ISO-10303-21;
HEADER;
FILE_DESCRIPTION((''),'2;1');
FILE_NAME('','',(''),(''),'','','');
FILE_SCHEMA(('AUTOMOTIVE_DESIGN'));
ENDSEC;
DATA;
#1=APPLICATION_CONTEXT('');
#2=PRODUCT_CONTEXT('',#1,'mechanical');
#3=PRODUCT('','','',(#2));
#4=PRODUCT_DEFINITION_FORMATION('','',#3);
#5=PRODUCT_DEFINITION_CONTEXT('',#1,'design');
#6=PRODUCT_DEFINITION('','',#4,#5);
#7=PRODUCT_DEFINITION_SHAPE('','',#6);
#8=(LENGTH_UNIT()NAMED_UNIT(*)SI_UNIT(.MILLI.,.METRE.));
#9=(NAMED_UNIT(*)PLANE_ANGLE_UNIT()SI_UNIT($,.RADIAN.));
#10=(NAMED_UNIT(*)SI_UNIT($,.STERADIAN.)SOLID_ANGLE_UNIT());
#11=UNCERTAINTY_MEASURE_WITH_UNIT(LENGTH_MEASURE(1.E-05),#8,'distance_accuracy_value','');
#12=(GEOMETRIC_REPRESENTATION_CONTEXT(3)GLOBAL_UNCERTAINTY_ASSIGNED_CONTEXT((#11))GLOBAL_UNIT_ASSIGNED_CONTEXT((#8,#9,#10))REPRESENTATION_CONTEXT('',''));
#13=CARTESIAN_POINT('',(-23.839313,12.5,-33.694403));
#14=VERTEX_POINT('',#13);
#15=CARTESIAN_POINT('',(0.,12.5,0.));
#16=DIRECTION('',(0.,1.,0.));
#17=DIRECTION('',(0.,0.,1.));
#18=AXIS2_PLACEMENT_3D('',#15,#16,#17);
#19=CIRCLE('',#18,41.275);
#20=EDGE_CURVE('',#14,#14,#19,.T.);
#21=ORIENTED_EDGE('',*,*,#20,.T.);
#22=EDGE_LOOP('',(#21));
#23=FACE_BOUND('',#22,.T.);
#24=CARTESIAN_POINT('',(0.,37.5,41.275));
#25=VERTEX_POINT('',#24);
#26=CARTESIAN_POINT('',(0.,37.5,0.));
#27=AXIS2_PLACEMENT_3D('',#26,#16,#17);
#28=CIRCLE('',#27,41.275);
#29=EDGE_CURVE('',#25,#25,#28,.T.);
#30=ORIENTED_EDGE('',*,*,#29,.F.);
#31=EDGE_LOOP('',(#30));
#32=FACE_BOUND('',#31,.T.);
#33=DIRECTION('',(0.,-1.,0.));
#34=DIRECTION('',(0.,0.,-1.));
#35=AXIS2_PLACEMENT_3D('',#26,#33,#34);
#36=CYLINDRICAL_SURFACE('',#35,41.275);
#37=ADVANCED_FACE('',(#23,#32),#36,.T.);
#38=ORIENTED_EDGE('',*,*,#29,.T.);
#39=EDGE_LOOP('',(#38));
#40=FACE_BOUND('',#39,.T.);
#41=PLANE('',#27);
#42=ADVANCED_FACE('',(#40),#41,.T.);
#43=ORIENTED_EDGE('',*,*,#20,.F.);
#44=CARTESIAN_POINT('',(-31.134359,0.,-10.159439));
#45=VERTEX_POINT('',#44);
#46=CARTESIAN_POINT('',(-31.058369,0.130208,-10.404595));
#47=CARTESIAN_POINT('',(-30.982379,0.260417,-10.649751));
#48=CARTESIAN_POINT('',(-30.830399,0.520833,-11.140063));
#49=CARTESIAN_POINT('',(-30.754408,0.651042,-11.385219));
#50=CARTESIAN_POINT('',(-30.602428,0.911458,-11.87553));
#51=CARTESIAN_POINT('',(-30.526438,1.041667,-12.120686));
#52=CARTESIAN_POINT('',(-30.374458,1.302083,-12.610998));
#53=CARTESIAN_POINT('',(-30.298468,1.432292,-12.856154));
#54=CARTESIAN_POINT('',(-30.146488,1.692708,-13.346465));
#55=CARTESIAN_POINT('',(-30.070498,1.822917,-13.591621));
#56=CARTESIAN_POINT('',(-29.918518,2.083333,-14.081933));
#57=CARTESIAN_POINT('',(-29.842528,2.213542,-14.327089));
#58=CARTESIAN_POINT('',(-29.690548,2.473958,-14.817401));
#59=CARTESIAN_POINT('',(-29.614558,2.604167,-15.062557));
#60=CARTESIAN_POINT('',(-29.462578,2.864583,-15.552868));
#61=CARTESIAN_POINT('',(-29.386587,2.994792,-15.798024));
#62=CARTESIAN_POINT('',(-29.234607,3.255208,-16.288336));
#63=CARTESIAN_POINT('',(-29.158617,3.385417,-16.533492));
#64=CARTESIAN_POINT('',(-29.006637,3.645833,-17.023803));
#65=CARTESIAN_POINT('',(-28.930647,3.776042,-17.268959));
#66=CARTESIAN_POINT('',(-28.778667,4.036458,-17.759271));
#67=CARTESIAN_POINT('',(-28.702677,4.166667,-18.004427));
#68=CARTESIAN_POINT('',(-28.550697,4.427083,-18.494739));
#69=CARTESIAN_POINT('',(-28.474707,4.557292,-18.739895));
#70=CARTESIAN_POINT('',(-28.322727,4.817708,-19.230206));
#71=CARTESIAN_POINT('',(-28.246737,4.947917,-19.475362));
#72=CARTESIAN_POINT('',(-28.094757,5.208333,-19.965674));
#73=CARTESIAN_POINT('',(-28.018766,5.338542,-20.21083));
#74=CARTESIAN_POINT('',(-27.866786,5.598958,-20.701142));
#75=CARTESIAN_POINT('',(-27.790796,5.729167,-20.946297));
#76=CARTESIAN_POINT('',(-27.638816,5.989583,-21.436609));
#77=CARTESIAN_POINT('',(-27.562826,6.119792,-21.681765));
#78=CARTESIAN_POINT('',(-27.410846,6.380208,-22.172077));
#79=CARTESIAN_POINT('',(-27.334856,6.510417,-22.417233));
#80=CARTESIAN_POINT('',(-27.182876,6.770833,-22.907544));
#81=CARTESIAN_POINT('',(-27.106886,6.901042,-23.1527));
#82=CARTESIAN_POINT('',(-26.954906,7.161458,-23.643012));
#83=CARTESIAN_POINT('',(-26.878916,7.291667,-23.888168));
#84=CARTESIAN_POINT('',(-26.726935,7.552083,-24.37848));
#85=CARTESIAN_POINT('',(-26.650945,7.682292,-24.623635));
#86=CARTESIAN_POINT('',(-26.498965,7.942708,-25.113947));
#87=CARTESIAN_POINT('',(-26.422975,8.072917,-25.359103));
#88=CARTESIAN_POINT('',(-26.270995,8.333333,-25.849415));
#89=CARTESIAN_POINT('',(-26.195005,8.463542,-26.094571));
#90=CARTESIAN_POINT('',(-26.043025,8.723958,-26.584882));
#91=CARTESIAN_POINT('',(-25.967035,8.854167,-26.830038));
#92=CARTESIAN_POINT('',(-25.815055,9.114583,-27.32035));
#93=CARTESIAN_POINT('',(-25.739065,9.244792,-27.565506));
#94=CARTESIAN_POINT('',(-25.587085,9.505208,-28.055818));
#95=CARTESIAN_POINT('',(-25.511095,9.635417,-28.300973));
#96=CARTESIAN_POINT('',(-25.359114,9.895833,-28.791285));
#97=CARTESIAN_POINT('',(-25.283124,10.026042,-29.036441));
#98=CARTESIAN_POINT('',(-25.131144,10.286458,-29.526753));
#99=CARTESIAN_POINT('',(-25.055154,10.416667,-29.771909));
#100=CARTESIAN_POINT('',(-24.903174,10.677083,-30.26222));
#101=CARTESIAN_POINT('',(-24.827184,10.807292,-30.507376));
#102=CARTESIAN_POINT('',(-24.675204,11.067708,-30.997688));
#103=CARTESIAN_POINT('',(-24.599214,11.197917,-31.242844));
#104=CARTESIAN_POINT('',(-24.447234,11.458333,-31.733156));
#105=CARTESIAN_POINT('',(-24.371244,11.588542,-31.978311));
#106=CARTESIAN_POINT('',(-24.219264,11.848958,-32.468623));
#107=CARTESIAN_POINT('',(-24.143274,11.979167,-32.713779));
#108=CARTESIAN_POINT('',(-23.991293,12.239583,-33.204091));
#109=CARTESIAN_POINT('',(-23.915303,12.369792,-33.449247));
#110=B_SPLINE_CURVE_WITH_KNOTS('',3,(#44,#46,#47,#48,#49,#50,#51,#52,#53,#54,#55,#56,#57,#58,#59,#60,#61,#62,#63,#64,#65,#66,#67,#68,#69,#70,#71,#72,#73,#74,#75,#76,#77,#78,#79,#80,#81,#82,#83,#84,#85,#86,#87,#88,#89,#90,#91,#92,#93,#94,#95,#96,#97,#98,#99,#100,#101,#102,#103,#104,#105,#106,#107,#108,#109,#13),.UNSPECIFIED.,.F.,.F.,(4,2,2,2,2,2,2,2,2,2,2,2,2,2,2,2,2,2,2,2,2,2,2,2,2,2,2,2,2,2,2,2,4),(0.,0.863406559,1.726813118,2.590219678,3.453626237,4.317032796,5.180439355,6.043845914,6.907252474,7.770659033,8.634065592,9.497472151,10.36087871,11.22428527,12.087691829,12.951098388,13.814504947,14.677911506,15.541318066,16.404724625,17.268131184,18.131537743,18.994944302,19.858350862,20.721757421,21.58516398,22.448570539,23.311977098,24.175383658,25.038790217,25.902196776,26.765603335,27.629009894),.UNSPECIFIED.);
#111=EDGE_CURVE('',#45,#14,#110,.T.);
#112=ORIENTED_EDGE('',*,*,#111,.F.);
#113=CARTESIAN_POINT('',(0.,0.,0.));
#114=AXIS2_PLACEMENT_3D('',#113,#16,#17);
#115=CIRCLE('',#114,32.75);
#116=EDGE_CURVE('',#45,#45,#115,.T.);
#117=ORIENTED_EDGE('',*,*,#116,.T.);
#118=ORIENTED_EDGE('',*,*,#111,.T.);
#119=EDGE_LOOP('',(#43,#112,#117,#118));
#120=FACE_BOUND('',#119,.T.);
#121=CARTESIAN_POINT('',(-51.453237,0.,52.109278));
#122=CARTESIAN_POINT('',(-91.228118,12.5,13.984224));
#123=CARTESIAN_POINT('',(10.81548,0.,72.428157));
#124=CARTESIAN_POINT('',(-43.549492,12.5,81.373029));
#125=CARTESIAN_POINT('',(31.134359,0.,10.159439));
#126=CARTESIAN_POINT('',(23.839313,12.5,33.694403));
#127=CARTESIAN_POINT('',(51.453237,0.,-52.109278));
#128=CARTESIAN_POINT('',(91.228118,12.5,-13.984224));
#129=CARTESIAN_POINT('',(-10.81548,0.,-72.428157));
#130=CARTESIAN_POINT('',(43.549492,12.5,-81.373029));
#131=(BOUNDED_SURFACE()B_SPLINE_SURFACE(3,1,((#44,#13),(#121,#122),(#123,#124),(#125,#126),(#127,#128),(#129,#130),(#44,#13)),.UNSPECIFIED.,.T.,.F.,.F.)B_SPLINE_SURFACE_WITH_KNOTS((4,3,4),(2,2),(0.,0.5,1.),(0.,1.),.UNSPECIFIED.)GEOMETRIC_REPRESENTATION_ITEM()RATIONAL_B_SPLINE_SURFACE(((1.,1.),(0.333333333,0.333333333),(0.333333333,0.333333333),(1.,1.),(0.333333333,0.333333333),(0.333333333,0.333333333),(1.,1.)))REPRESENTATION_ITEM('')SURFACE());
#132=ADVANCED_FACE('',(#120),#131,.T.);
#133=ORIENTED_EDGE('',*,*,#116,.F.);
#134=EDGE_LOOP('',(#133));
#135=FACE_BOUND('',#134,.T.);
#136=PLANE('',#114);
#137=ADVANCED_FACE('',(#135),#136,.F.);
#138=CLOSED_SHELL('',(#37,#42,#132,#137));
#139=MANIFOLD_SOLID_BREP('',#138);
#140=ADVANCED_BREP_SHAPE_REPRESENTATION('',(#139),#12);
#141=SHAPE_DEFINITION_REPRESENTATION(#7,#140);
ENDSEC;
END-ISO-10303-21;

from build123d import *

# Parameters (mm, degrees)
SKETCH3_R           = 41.275
BOSS_EXTRUDE1_DEPTH = 25


with BuildPart() as part:
    # Loft1: read off the stored shape, not the designer's step
    # Loft1: loft between two sections, ruled curve by curve
    loft1_from = [
        Edge.make_bspline([(-31.134358767, 0, -10.159439166), (-51.453237099, 0, 52.109278368), (10.815480435, 0, 72.4281567), (31.134358767, 0, 10.159439166), (51.453237099, 0, -52.109278368), (-10.815480435, 0, -72.4281567), (-31.134358767, 0, -10.159439166)], [0, 0, 0, 0, 0.5, 0.5, 0.5, 1, 1, 1, 1], 3, [1, 0.333333333, 0.333333333, 1, 0.333333333, 0.333333333, 1]),
    ]
    loft1_to = [
        Edge.make_bspline([(-23.839313334, 12.499999892, -33.694402573), (-91.22811848, 12.499999892, 13.984224094), (-43.549491813, 12.499999892, 81.373029241), (23.839313334, 12.499999892, 33.694402573), (91.22811848, 12.499999892, -13.984224094), (43.549491813, 12.499999892, -81.373029241), (-23.839313334, 12.499999892, -33.694402573)], [0, 0, 0, 0, 0.5, 0.5, 0.5, 1, 1, 1, 1], 3, [1, 0.333333333, 0.333333333, 1, 0.333333333, 0.333333333, 1]),
    ]
    loft1 = Solid(Shell([*[Face.make_surface_from_curves(loft1_from[k], loft1_to[k]) for k in range(1)], Face(Wire(loft1_from)), Face(Wire(loft1_to))]))
    add(loft1)

    # Sketch3 → Boss-Extrude1 (add)
    with BuildSketch(Plane(origin=(0, 12.499999892, 0), x_dir=(1, 0, 0), z_dir=(0, 1, 0))):
        with Locations(Location((0, 0, 0), (0, 0, 125.28))):
            Circle(SKETCH3_R)
    extrude(amount=BOSS_EXTRUDE1_DEPTH)


solid = part.part
